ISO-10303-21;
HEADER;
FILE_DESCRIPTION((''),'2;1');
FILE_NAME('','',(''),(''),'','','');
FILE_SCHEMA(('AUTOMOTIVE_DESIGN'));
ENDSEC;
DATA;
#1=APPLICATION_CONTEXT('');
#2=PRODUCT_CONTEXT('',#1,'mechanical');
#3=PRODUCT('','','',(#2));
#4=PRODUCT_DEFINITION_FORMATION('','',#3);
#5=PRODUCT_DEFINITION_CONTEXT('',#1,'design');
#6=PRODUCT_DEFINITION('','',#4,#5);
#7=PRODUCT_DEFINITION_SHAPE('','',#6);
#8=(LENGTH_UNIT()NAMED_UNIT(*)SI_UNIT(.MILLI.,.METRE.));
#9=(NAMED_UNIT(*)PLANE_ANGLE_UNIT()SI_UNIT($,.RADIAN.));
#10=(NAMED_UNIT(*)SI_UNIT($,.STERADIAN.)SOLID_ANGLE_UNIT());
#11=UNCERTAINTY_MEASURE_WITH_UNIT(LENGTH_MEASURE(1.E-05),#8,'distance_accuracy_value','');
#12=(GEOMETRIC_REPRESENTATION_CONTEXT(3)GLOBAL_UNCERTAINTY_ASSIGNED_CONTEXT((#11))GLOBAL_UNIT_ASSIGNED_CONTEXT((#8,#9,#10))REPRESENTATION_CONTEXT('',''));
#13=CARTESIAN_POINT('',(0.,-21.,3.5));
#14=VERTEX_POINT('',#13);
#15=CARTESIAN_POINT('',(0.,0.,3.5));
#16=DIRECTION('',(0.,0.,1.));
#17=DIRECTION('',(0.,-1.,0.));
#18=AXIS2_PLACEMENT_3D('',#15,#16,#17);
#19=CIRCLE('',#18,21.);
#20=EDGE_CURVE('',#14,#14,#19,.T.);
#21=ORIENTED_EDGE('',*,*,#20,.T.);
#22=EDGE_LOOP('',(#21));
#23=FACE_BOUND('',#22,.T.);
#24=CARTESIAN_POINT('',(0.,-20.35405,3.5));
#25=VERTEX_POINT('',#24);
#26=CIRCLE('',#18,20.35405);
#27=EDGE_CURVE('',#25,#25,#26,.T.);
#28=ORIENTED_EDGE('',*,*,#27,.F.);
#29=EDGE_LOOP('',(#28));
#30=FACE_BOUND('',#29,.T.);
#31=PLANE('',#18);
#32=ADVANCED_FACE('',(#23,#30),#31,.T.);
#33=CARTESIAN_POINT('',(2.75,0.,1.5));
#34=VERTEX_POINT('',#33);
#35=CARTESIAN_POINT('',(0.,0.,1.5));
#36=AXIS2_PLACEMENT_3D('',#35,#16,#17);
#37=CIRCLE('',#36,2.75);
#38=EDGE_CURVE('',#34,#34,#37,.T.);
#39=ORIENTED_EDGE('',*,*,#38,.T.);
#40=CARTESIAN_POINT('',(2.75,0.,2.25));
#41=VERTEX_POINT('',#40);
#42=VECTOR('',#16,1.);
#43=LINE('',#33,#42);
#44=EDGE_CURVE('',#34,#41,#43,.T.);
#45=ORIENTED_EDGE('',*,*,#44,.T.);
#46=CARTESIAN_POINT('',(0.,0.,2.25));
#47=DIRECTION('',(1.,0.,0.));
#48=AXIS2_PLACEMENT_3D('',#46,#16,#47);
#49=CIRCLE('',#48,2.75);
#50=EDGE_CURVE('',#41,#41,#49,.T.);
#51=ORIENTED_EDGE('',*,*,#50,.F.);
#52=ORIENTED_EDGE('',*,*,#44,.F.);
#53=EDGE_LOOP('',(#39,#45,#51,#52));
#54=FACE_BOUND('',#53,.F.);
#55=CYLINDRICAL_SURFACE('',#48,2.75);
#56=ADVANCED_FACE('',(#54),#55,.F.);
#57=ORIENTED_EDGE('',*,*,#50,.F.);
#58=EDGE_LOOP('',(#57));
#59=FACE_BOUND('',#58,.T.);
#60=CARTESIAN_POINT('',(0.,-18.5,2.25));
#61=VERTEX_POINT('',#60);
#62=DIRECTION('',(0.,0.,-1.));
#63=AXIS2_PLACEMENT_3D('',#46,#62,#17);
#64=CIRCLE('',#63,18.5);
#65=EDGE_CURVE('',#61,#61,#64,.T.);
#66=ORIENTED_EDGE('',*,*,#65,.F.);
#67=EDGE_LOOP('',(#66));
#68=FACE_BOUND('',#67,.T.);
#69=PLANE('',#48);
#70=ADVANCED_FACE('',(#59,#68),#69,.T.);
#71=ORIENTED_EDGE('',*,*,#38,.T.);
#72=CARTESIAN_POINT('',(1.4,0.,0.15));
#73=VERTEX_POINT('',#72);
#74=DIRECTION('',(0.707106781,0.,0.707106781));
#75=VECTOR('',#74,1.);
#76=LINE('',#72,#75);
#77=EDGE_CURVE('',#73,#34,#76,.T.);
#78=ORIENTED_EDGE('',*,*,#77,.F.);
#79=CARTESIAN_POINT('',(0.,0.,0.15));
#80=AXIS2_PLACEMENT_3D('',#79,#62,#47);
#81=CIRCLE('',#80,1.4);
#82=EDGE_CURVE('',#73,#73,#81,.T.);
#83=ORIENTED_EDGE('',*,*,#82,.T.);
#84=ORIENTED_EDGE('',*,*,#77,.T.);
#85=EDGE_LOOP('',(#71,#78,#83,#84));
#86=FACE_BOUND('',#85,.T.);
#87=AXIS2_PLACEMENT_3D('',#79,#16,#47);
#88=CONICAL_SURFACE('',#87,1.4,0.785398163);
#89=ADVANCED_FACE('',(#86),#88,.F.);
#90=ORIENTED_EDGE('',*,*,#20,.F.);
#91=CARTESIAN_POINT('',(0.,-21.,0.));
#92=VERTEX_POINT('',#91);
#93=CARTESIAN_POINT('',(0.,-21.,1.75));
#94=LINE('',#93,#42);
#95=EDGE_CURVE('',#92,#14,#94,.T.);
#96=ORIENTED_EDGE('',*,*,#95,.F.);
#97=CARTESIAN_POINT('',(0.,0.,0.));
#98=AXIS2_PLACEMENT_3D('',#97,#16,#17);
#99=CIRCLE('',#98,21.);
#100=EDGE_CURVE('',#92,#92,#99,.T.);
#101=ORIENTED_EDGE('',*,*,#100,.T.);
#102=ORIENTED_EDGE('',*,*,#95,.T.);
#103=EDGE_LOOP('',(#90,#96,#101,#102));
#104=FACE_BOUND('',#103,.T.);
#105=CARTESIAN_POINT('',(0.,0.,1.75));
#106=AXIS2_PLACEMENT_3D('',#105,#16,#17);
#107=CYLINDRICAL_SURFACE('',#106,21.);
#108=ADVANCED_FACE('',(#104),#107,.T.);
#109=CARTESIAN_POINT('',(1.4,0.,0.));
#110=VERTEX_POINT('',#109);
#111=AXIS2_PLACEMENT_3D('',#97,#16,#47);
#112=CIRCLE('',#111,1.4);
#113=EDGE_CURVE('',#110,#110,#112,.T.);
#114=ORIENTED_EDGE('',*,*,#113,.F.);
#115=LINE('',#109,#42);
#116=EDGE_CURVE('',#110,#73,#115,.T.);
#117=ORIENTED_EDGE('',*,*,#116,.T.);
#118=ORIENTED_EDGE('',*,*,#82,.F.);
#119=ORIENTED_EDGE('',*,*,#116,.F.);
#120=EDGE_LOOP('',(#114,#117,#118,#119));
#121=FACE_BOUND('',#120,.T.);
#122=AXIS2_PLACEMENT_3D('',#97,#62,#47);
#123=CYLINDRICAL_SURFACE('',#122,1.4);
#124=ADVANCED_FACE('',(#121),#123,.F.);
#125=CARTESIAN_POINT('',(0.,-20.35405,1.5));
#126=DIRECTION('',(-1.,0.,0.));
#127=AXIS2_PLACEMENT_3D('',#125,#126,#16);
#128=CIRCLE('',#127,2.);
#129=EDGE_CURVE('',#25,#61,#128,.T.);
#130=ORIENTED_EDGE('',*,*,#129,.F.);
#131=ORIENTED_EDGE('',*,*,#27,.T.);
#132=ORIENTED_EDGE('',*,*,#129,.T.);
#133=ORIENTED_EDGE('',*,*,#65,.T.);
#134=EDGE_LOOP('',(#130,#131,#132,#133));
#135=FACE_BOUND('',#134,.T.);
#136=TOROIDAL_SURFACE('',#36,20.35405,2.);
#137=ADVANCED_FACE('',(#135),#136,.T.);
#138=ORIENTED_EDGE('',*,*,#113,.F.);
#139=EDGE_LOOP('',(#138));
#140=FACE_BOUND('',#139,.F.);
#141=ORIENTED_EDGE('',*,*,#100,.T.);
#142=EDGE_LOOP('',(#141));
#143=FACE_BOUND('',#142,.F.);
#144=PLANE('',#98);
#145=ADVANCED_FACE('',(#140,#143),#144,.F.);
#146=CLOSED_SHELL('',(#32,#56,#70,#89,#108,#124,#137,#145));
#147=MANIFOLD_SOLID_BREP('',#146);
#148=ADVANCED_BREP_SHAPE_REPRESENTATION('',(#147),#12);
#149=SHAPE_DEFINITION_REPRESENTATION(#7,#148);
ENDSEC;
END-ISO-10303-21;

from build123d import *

# Parameters (mm, degrees)
F0_R        = 18.5
F0_R_2      = 1.4
F1_DEPTH    = 2.25
F2_R        = 2.75
F3_DEPTH    = 0.1
F4_S5_R     = 2.75
F4_T6_DEPTH = 6
F6_W        = 2.5
F6_H        = 3.5


# Not quite as in the source:
# - a fillet or chamfer that OpenCascade refuses, or shapes differently, is made with other operations: its cross-section is extruded or revolved along the edge and cut away or added
# - a feature names something its author has since deleted; it is built from what else it names


with BuildPart() as f1:
    # F0 (on Top) → F1 (new body)
    with BuildSketch(Plane.XY):
        Circle(F0_R)
        Circle(F0_R_2, mode=Mode.SUBTRACT)
    extrude(amount=F1_DEPTH)

    # F2 (on face) → F3 (cut)
    with BuildSketch(Plane.XY.offset(2.25)):
        Circle(F2_R)
    extrude(amount=-F3_DEPTH, mode=Mode.SUBTRACT)

    # F4: chamfer of 2 on 1 edges, made by hand


with BuildPart() as f4_tool2:
    # F4_s3 → F4_t4 (revolve)
    with BuildSketch(Plane.XZ):
        Polygon((1.4, 0.15), (3.4, 2.15), (1.4, 2.15), align=None)
    revolve(axis=Axis((0, 0, 2.15), (0, 0, -1)))

    # F4_s5 → F4_t6 (intersect, symmetric)
    with BuildSketch(Plane.XY.offset(1.2)):
        Circle(F4_S5_R)
    extrude(amount=F4_T6_DEPTH, both=True, mode=Mode.INTERSECT)


with BuildPart() as f1_1:
    add(f1.part)

    # F4_t1: cut F4_tool2
    add(f4_tool2.part, mode=Mode.SUBTRACT)

    # F6 (on Right) → F7 (revolve)
    with BuildSketch(Plane.YZ):
        with Locations((-19.75, 1.75)):
            Rectangle(F6_W, F6_H)
    revolve(axis=Axis((0, 0, 7.0907436311), (0, 0, 1)))

    # F8: fillet of radius 2 on 1 edges, made by hand

    # F8_s1 → F8_t2 (revolve, cut)
    with BuildSketch(Plane.YZ):
        with BuildLine():
            ThreePointArc((-20.3540496218, 3.5), (-19.236015633, 3.1583123952), (-18.5, 2.25))
            Line((-18.5, 2.25), (-18.5, 3.5))
            Line((-18.5, 3.5), (-20.3540496218, 3.5))
        make_face()
    revolve(axis=Axis((0, 0, 3.5), (0, 0, 1)), mode=Mode.SUBTRACT)


solid = f1_1.part
